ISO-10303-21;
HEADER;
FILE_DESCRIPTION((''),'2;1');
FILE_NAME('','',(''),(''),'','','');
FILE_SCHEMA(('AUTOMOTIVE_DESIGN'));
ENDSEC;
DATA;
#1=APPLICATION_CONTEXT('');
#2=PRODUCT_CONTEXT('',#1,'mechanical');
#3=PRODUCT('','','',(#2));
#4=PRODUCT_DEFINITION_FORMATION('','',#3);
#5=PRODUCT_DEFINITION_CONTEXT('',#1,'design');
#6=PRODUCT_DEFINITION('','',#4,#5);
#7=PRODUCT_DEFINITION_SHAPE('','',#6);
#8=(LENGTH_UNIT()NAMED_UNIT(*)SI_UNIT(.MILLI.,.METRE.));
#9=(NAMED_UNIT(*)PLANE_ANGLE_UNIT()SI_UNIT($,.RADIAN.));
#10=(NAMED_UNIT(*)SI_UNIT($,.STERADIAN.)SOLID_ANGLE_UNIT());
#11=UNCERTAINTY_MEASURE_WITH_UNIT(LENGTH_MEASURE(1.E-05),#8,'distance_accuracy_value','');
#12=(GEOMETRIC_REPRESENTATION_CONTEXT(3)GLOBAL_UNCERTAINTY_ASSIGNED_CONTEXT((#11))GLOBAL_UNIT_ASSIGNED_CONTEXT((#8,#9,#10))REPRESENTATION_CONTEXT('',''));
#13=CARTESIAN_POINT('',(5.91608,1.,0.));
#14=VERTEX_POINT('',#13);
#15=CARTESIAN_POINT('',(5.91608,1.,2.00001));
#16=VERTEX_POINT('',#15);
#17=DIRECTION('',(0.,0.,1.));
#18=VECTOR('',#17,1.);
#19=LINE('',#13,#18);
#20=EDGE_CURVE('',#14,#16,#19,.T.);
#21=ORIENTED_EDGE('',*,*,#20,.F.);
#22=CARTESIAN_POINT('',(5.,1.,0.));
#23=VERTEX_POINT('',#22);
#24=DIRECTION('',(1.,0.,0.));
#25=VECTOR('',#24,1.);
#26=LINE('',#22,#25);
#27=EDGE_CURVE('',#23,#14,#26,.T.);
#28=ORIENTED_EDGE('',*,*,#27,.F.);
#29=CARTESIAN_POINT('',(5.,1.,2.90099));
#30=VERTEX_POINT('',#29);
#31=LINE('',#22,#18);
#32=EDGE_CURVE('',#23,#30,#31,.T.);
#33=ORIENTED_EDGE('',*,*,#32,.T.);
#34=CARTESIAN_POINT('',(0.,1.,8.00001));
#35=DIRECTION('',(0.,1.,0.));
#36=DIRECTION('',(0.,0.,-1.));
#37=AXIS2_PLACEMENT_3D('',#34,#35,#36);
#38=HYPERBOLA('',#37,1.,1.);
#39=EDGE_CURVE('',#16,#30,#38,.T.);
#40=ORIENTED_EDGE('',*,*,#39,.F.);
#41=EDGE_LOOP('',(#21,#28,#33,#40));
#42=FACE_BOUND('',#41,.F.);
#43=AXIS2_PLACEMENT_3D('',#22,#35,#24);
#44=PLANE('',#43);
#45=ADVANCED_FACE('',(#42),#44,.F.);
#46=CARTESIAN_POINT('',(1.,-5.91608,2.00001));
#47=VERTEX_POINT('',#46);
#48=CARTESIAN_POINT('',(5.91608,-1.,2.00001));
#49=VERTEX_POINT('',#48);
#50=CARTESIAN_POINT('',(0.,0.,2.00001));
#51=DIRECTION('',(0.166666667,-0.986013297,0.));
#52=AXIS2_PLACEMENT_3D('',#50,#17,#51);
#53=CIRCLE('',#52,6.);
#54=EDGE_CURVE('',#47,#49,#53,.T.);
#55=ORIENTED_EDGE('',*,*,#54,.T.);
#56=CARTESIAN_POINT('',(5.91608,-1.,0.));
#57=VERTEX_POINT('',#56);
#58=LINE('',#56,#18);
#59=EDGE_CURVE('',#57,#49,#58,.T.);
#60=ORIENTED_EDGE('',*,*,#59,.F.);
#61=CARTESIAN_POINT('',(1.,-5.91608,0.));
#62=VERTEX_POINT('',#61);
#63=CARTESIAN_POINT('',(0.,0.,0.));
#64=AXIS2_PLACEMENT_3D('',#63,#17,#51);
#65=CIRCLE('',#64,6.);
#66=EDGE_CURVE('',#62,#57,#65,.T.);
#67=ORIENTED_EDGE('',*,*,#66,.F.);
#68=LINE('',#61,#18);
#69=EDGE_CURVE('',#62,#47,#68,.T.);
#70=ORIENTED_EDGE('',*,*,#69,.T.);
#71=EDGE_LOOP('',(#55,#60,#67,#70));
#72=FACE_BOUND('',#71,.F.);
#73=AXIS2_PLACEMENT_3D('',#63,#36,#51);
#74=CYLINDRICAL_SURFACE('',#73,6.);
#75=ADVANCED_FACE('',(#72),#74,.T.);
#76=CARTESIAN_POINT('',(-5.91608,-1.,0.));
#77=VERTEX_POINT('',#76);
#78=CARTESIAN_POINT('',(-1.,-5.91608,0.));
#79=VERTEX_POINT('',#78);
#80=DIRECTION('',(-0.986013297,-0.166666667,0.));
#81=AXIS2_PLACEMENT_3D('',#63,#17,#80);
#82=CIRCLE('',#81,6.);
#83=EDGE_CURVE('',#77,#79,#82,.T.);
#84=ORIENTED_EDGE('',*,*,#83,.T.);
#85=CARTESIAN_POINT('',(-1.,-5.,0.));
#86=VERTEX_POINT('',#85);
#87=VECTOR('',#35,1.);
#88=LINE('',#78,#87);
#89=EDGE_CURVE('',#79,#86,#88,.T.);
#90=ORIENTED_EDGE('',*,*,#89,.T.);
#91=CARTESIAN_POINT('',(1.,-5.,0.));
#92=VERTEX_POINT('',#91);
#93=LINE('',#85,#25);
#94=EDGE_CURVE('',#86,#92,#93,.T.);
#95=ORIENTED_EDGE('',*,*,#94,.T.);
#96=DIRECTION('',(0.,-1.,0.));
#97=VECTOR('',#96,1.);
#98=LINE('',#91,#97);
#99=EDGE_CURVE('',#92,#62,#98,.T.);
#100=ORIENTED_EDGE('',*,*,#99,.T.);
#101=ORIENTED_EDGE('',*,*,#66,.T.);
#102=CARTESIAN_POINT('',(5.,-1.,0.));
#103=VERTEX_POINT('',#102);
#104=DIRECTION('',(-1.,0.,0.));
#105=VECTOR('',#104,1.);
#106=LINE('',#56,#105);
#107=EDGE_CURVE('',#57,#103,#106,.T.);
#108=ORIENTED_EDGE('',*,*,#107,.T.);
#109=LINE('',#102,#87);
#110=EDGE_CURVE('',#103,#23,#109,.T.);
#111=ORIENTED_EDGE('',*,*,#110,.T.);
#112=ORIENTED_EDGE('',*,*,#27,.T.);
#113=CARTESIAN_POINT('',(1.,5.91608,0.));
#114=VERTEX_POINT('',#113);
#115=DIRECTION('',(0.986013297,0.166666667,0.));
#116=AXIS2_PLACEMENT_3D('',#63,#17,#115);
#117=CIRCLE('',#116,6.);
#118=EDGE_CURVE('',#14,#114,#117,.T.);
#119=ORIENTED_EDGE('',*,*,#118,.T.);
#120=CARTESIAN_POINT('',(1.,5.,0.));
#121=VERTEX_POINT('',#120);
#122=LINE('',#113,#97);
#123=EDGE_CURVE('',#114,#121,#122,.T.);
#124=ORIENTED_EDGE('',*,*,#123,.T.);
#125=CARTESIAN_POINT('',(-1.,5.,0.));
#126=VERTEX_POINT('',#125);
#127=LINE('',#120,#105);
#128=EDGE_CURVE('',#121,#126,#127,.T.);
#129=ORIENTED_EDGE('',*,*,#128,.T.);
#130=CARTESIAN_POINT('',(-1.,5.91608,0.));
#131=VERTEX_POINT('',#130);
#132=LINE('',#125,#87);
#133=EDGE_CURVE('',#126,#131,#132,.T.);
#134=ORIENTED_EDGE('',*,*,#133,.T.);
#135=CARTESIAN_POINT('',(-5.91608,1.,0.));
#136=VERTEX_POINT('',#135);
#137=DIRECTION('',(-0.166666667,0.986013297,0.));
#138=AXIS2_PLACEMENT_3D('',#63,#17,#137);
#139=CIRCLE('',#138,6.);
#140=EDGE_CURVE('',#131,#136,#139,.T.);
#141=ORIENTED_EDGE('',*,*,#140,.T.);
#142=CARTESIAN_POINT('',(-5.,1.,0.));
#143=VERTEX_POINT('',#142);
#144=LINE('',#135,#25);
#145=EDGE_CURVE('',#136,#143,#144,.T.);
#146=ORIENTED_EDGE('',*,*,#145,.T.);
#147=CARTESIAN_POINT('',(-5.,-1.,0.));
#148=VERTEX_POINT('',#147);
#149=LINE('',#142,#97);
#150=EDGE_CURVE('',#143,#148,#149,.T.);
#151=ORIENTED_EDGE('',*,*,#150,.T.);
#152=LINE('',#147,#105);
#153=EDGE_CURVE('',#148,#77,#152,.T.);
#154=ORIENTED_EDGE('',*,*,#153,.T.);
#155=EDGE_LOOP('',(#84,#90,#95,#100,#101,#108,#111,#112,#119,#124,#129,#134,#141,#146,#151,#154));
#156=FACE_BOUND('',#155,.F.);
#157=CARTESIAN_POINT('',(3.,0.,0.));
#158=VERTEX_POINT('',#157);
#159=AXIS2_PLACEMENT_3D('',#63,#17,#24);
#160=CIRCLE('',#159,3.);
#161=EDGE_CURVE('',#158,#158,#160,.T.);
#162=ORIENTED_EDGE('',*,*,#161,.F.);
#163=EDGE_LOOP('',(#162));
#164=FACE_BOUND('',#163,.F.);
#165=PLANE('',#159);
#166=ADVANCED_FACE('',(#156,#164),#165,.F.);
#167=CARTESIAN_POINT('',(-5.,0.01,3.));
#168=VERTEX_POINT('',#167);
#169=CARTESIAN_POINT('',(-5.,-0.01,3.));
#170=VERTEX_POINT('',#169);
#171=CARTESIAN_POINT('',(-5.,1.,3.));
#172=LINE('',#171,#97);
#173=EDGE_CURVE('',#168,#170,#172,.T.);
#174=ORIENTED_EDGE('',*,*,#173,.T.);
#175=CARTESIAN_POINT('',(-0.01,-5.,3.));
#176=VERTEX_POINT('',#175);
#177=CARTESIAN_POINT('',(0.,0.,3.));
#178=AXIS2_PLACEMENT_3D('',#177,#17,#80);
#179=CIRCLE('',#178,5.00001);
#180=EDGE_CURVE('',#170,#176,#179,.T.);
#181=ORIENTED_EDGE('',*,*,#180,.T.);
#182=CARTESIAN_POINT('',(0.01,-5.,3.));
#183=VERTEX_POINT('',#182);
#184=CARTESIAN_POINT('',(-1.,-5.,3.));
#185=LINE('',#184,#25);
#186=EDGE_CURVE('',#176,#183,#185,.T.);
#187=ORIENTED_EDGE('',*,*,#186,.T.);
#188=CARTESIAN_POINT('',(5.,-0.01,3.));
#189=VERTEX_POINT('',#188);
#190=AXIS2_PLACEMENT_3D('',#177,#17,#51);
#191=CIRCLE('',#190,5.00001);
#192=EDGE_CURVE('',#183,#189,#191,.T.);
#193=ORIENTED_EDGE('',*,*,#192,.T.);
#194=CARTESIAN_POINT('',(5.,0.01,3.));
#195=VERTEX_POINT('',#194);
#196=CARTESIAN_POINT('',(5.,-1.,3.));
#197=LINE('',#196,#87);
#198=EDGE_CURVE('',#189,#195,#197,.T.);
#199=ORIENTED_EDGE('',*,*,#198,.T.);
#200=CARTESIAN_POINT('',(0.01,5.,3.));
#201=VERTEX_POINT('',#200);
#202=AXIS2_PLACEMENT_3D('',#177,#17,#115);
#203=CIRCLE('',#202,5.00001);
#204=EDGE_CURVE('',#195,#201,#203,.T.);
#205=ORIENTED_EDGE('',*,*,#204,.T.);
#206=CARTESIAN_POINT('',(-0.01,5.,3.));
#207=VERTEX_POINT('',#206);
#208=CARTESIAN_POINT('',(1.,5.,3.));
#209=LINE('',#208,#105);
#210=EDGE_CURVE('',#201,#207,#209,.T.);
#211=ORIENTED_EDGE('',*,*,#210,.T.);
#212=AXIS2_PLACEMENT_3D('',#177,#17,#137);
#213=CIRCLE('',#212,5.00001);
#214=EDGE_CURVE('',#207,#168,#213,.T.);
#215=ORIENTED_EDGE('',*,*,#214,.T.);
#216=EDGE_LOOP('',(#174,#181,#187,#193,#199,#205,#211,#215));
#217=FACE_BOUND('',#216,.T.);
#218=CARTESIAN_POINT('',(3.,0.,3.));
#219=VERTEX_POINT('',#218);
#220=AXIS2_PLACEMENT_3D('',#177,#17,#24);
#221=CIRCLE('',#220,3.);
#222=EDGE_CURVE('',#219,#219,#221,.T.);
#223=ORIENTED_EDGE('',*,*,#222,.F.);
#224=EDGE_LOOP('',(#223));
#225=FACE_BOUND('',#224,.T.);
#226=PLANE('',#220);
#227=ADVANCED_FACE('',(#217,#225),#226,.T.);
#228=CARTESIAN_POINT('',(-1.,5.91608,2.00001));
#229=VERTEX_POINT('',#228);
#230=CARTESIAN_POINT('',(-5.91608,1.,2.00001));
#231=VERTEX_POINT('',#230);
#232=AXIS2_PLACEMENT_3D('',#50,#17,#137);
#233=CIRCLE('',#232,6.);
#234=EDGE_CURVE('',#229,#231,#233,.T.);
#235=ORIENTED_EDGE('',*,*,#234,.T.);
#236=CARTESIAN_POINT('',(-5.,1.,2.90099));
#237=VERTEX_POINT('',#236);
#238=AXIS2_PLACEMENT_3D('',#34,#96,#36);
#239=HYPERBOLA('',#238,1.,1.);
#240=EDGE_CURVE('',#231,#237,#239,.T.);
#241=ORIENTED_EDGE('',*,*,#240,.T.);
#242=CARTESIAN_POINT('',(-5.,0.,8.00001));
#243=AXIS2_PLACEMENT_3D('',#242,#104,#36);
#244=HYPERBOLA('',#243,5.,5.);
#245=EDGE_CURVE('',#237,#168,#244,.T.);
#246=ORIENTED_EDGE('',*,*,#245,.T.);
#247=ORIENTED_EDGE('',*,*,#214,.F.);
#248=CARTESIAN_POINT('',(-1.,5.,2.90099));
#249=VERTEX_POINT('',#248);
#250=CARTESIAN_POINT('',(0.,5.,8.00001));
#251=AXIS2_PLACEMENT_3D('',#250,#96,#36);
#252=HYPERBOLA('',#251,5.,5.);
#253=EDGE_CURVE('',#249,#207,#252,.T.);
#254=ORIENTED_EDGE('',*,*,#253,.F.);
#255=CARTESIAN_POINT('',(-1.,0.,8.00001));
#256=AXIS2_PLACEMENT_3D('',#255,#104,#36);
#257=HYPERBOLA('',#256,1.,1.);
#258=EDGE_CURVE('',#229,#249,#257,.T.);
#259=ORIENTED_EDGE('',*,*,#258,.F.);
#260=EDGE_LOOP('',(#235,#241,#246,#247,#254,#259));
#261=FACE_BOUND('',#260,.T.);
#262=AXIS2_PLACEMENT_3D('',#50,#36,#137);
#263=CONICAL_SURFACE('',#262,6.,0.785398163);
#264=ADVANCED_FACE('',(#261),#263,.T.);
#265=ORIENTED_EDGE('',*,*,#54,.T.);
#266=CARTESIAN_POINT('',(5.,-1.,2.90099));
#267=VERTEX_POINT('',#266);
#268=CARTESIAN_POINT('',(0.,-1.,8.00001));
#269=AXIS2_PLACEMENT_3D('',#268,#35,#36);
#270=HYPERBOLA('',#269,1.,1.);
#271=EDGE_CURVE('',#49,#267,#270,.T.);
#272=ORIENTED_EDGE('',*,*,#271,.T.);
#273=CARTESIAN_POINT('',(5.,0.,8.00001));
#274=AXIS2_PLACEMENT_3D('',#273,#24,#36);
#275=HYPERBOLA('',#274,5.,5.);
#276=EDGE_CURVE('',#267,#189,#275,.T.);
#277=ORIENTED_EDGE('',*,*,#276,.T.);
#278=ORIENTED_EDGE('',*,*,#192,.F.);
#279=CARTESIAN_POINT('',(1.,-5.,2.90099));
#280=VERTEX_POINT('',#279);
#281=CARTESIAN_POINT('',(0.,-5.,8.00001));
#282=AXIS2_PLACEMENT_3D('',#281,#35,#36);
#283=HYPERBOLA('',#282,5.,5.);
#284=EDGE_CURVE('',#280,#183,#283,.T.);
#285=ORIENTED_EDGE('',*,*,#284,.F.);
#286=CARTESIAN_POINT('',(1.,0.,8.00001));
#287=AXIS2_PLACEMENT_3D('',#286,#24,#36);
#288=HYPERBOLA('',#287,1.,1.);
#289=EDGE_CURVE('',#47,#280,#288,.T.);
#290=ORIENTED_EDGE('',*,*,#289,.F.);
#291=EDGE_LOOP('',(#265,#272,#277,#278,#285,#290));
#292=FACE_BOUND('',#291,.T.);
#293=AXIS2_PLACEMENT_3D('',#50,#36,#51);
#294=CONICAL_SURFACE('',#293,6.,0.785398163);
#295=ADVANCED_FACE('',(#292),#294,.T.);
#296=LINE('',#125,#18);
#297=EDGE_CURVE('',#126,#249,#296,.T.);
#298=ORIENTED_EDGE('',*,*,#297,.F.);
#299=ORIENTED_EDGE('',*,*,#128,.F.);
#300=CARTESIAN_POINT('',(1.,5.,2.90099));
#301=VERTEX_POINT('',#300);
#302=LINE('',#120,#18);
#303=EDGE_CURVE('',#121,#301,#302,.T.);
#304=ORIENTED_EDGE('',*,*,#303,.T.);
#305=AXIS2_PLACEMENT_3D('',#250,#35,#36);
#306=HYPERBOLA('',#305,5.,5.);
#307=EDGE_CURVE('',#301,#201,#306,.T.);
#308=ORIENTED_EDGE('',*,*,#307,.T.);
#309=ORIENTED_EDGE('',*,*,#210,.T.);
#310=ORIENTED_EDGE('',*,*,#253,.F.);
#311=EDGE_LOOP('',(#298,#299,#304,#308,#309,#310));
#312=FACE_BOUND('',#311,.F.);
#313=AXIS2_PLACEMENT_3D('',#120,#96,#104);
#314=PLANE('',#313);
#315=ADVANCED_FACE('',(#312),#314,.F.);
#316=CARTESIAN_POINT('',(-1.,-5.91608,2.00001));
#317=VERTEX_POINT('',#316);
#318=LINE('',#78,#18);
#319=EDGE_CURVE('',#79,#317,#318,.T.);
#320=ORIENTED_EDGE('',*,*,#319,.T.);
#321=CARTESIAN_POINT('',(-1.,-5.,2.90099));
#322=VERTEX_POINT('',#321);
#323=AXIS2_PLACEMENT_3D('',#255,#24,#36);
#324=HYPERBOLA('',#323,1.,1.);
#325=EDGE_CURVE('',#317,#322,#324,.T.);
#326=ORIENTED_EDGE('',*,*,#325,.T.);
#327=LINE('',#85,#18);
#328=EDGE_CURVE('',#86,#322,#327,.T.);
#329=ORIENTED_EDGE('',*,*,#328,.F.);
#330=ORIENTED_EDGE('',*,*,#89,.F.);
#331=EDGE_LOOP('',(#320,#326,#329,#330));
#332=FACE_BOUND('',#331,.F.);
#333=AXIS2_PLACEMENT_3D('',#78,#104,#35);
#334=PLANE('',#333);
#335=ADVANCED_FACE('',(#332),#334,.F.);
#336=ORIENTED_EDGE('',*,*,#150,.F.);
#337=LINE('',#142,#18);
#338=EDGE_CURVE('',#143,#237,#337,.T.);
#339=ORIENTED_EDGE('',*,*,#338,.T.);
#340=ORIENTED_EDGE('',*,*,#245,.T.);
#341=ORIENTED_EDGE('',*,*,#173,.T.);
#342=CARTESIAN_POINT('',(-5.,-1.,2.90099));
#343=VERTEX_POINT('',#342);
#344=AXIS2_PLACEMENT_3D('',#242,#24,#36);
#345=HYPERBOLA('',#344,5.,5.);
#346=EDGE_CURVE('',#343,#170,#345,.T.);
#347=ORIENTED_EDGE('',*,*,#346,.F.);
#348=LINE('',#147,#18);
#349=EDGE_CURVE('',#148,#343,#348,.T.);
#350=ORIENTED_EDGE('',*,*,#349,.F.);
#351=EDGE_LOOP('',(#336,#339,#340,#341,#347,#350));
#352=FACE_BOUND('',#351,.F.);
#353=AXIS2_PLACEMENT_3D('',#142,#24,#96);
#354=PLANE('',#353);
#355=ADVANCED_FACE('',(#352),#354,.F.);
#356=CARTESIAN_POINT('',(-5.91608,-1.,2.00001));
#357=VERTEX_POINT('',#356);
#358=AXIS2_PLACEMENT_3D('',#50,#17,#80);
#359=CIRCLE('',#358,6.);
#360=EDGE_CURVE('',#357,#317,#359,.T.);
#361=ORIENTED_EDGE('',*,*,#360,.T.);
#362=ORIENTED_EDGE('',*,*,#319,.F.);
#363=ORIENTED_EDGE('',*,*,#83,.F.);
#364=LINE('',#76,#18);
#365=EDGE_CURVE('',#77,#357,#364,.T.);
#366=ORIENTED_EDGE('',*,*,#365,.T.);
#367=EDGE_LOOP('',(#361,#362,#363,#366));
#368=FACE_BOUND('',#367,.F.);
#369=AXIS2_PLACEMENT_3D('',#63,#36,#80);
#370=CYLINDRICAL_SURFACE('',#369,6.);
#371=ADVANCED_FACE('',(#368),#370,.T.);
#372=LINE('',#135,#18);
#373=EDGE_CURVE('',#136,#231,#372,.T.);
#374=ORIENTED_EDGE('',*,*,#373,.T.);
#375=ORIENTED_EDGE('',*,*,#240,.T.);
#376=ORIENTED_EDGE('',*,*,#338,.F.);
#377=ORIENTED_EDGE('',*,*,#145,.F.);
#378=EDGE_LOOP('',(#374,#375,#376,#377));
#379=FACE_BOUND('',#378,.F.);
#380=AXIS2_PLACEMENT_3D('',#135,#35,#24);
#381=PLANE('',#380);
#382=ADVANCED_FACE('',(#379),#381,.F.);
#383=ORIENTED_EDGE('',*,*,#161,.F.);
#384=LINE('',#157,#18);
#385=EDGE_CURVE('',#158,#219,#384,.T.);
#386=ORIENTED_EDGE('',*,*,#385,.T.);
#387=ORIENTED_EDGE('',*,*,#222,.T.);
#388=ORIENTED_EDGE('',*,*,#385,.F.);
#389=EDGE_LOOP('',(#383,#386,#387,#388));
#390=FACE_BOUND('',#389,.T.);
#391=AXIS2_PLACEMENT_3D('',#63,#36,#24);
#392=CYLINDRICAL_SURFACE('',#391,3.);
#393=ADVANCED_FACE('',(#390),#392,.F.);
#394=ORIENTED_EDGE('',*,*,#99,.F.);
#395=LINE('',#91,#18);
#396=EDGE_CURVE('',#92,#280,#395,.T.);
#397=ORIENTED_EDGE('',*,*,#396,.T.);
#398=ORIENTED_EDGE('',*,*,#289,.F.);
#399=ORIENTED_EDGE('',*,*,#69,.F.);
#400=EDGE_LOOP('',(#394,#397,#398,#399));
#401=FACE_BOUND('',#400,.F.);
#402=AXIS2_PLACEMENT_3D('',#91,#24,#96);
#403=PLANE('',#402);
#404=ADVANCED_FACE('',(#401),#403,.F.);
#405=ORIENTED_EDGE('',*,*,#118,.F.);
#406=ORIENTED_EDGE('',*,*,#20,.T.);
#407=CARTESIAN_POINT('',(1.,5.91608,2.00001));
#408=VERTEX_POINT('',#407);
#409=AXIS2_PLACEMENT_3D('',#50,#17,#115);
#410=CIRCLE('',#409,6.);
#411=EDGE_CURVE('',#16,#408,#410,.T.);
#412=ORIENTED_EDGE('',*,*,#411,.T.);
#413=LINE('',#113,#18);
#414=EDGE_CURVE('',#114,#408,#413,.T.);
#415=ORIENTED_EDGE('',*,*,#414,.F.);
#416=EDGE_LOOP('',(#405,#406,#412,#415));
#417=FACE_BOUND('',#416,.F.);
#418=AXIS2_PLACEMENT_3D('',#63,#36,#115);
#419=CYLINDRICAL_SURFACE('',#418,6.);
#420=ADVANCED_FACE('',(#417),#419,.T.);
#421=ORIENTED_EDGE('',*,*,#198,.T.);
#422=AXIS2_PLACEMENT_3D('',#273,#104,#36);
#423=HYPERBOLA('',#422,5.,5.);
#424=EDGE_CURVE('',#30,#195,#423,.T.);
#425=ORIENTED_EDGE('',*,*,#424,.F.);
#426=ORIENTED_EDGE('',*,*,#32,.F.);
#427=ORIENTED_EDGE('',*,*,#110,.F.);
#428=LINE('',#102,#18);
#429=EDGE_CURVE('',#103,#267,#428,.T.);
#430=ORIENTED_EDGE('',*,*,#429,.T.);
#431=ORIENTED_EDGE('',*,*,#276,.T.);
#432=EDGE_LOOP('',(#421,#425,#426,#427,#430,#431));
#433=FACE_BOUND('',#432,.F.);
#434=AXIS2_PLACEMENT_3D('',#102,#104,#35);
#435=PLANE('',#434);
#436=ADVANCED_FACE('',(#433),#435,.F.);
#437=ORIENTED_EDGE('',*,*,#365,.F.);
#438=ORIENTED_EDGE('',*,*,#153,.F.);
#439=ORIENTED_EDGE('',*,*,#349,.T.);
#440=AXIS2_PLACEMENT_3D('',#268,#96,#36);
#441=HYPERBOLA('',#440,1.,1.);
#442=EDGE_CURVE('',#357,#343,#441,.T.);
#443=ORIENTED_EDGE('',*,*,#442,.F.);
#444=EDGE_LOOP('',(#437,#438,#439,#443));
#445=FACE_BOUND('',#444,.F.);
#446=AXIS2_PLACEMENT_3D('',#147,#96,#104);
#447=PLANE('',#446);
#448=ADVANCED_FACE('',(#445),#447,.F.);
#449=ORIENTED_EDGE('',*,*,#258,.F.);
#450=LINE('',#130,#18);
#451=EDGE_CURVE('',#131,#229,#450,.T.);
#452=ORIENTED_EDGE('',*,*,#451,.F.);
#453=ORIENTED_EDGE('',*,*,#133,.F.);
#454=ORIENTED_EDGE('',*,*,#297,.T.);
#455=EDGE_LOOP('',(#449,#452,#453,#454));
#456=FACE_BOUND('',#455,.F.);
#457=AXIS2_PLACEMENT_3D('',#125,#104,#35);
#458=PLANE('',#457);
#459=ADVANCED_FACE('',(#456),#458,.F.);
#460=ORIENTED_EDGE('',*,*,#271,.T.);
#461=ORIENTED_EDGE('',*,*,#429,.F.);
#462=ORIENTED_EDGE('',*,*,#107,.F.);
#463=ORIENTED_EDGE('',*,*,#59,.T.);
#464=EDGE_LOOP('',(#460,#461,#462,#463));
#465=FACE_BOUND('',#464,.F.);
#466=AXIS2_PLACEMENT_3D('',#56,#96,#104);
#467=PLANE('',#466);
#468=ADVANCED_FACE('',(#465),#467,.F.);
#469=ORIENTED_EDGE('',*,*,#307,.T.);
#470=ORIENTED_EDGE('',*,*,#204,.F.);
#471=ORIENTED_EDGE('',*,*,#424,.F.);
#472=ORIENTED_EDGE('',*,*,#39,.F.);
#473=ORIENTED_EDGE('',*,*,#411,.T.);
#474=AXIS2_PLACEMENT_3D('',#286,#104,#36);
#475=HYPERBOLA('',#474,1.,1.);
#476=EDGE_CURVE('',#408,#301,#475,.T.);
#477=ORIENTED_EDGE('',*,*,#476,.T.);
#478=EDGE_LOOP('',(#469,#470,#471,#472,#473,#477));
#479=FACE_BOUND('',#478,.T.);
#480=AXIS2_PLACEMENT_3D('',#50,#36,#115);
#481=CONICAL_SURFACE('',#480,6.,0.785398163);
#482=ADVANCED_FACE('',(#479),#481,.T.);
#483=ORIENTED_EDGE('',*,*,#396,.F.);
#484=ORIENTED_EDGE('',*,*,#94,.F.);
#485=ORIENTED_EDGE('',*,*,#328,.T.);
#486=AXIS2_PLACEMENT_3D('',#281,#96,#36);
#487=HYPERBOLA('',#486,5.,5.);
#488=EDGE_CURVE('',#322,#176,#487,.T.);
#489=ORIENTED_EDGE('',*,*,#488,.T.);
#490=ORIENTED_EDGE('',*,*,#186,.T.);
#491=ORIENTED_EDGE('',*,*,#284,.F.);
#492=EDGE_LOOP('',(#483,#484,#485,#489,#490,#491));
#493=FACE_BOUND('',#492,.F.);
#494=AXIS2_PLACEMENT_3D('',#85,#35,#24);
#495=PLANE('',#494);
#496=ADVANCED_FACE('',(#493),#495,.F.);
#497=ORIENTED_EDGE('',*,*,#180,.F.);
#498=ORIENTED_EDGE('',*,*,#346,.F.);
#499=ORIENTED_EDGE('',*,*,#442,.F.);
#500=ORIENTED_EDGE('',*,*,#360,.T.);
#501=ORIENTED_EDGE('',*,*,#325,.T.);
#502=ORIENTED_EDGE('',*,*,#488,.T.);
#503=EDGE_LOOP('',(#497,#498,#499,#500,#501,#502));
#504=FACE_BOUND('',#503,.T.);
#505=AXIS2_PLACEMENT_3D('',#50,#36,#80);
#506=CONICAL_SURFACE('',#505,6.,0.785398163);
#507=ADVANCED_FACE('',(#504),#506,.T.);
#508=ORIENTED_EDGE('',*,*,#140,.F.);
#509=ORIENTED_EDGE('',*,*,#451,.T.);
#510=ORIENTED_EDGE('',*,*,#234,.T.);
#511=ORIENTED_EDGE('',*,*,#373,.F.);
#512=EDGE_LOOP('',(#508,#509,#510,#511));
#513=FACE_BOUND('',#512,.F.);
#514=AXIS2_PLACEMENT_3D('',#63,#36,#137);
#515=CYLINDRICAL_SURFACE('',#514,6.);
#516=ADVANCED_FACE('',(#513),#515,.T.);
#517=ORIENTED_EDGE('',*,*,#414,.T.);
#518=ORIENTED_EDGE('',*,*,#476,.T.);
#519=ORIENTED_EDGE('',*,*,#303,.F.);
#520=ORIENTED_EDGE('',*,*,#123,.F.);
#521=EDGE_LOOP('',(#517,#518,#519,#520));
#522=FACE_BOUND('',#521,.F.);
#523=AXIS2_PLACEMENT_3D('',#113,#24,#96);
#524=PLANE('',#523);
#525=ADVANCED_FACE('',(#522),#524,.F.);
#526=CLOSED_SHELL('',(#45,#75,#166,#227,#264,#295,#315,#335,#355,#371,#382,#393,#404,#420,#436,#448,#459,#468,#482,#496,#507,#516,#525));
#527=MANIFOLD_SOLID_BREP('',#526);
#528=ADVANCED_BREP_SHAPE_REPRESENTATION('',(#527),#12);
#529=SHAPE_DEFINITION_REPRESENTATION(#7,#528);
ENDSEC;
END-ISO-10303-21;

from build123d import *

# Parameters (mm, degrees)
F0_R     = 3
F1_DEPTH = 3
F2_SIZE  = 0.99999


# Not quite as in the source:
# - a fillet or chamfer is up to 0.001 mm smaller than in the source, because OpenCascade refuses the exact size


with BuildPart() as f1:
    # F0 (on Top) → F1 (new body)
    with BuildSketch(Plane.XY):
        with BuildLine():
            Line((-1, 5), (-1, 5.9160797831))
            ThreePointArc((-1, 5.9160797831), (-4.2426406871, 4.2426406871), (-5.9160797831, 1))
            Line((-5.9160797831, 1), (-5, 1))
            Line((-5, 1), (-5, -1))
            Line((-5, -1), (-5.9160797831, -1))
            ThreePointArc((-5.9160797831, -1), (-4.2426406871, -4.2426406871), (-1, -5.9160797831))
            Line((-1, -5.9160797831), (-1, -5))
            Line((-1, -5), (1, -5))
            Line((1, -5), (1, -5.9160797831))
            ThreePointArc((1, -5.9160797831), (4.2426406871, -4.2426406871), (5.9160797831, -1))
            Line((5.9160797831, -1), (5, -1))
            Line((5, -1), (5, 1))
            Line((5, 1), (5.9160797831, 1))
            ThreePointArc((5.9160797831, 1), (4.2426406871, 4.2426406871), (1, 5.9160797831))
            Line((1, 5.9160797831), (1, 5))
            Line((1, 5), (-1, 5))
        make_face()
        Circle(F0_R, mode=Mode.SUBTRACT)
    extrude(amount=F1_DEPTH)

    # F2 (size 1 in the source; OpenCascade refuses exactly that, so slightly less here)
    f2_edges = [f1.edges().sort_by_distance(p)[0] for p in [
        (-4.242641, -4.242641, 3),
        (-4.242641, 4.242641, 3),
        (4.242641, 4.242641, 3),
        (4.242641, -4.242641, 3),
    ]]
    chamfer(f2_edges, length=F2_SIZE)


solid = f1.part
